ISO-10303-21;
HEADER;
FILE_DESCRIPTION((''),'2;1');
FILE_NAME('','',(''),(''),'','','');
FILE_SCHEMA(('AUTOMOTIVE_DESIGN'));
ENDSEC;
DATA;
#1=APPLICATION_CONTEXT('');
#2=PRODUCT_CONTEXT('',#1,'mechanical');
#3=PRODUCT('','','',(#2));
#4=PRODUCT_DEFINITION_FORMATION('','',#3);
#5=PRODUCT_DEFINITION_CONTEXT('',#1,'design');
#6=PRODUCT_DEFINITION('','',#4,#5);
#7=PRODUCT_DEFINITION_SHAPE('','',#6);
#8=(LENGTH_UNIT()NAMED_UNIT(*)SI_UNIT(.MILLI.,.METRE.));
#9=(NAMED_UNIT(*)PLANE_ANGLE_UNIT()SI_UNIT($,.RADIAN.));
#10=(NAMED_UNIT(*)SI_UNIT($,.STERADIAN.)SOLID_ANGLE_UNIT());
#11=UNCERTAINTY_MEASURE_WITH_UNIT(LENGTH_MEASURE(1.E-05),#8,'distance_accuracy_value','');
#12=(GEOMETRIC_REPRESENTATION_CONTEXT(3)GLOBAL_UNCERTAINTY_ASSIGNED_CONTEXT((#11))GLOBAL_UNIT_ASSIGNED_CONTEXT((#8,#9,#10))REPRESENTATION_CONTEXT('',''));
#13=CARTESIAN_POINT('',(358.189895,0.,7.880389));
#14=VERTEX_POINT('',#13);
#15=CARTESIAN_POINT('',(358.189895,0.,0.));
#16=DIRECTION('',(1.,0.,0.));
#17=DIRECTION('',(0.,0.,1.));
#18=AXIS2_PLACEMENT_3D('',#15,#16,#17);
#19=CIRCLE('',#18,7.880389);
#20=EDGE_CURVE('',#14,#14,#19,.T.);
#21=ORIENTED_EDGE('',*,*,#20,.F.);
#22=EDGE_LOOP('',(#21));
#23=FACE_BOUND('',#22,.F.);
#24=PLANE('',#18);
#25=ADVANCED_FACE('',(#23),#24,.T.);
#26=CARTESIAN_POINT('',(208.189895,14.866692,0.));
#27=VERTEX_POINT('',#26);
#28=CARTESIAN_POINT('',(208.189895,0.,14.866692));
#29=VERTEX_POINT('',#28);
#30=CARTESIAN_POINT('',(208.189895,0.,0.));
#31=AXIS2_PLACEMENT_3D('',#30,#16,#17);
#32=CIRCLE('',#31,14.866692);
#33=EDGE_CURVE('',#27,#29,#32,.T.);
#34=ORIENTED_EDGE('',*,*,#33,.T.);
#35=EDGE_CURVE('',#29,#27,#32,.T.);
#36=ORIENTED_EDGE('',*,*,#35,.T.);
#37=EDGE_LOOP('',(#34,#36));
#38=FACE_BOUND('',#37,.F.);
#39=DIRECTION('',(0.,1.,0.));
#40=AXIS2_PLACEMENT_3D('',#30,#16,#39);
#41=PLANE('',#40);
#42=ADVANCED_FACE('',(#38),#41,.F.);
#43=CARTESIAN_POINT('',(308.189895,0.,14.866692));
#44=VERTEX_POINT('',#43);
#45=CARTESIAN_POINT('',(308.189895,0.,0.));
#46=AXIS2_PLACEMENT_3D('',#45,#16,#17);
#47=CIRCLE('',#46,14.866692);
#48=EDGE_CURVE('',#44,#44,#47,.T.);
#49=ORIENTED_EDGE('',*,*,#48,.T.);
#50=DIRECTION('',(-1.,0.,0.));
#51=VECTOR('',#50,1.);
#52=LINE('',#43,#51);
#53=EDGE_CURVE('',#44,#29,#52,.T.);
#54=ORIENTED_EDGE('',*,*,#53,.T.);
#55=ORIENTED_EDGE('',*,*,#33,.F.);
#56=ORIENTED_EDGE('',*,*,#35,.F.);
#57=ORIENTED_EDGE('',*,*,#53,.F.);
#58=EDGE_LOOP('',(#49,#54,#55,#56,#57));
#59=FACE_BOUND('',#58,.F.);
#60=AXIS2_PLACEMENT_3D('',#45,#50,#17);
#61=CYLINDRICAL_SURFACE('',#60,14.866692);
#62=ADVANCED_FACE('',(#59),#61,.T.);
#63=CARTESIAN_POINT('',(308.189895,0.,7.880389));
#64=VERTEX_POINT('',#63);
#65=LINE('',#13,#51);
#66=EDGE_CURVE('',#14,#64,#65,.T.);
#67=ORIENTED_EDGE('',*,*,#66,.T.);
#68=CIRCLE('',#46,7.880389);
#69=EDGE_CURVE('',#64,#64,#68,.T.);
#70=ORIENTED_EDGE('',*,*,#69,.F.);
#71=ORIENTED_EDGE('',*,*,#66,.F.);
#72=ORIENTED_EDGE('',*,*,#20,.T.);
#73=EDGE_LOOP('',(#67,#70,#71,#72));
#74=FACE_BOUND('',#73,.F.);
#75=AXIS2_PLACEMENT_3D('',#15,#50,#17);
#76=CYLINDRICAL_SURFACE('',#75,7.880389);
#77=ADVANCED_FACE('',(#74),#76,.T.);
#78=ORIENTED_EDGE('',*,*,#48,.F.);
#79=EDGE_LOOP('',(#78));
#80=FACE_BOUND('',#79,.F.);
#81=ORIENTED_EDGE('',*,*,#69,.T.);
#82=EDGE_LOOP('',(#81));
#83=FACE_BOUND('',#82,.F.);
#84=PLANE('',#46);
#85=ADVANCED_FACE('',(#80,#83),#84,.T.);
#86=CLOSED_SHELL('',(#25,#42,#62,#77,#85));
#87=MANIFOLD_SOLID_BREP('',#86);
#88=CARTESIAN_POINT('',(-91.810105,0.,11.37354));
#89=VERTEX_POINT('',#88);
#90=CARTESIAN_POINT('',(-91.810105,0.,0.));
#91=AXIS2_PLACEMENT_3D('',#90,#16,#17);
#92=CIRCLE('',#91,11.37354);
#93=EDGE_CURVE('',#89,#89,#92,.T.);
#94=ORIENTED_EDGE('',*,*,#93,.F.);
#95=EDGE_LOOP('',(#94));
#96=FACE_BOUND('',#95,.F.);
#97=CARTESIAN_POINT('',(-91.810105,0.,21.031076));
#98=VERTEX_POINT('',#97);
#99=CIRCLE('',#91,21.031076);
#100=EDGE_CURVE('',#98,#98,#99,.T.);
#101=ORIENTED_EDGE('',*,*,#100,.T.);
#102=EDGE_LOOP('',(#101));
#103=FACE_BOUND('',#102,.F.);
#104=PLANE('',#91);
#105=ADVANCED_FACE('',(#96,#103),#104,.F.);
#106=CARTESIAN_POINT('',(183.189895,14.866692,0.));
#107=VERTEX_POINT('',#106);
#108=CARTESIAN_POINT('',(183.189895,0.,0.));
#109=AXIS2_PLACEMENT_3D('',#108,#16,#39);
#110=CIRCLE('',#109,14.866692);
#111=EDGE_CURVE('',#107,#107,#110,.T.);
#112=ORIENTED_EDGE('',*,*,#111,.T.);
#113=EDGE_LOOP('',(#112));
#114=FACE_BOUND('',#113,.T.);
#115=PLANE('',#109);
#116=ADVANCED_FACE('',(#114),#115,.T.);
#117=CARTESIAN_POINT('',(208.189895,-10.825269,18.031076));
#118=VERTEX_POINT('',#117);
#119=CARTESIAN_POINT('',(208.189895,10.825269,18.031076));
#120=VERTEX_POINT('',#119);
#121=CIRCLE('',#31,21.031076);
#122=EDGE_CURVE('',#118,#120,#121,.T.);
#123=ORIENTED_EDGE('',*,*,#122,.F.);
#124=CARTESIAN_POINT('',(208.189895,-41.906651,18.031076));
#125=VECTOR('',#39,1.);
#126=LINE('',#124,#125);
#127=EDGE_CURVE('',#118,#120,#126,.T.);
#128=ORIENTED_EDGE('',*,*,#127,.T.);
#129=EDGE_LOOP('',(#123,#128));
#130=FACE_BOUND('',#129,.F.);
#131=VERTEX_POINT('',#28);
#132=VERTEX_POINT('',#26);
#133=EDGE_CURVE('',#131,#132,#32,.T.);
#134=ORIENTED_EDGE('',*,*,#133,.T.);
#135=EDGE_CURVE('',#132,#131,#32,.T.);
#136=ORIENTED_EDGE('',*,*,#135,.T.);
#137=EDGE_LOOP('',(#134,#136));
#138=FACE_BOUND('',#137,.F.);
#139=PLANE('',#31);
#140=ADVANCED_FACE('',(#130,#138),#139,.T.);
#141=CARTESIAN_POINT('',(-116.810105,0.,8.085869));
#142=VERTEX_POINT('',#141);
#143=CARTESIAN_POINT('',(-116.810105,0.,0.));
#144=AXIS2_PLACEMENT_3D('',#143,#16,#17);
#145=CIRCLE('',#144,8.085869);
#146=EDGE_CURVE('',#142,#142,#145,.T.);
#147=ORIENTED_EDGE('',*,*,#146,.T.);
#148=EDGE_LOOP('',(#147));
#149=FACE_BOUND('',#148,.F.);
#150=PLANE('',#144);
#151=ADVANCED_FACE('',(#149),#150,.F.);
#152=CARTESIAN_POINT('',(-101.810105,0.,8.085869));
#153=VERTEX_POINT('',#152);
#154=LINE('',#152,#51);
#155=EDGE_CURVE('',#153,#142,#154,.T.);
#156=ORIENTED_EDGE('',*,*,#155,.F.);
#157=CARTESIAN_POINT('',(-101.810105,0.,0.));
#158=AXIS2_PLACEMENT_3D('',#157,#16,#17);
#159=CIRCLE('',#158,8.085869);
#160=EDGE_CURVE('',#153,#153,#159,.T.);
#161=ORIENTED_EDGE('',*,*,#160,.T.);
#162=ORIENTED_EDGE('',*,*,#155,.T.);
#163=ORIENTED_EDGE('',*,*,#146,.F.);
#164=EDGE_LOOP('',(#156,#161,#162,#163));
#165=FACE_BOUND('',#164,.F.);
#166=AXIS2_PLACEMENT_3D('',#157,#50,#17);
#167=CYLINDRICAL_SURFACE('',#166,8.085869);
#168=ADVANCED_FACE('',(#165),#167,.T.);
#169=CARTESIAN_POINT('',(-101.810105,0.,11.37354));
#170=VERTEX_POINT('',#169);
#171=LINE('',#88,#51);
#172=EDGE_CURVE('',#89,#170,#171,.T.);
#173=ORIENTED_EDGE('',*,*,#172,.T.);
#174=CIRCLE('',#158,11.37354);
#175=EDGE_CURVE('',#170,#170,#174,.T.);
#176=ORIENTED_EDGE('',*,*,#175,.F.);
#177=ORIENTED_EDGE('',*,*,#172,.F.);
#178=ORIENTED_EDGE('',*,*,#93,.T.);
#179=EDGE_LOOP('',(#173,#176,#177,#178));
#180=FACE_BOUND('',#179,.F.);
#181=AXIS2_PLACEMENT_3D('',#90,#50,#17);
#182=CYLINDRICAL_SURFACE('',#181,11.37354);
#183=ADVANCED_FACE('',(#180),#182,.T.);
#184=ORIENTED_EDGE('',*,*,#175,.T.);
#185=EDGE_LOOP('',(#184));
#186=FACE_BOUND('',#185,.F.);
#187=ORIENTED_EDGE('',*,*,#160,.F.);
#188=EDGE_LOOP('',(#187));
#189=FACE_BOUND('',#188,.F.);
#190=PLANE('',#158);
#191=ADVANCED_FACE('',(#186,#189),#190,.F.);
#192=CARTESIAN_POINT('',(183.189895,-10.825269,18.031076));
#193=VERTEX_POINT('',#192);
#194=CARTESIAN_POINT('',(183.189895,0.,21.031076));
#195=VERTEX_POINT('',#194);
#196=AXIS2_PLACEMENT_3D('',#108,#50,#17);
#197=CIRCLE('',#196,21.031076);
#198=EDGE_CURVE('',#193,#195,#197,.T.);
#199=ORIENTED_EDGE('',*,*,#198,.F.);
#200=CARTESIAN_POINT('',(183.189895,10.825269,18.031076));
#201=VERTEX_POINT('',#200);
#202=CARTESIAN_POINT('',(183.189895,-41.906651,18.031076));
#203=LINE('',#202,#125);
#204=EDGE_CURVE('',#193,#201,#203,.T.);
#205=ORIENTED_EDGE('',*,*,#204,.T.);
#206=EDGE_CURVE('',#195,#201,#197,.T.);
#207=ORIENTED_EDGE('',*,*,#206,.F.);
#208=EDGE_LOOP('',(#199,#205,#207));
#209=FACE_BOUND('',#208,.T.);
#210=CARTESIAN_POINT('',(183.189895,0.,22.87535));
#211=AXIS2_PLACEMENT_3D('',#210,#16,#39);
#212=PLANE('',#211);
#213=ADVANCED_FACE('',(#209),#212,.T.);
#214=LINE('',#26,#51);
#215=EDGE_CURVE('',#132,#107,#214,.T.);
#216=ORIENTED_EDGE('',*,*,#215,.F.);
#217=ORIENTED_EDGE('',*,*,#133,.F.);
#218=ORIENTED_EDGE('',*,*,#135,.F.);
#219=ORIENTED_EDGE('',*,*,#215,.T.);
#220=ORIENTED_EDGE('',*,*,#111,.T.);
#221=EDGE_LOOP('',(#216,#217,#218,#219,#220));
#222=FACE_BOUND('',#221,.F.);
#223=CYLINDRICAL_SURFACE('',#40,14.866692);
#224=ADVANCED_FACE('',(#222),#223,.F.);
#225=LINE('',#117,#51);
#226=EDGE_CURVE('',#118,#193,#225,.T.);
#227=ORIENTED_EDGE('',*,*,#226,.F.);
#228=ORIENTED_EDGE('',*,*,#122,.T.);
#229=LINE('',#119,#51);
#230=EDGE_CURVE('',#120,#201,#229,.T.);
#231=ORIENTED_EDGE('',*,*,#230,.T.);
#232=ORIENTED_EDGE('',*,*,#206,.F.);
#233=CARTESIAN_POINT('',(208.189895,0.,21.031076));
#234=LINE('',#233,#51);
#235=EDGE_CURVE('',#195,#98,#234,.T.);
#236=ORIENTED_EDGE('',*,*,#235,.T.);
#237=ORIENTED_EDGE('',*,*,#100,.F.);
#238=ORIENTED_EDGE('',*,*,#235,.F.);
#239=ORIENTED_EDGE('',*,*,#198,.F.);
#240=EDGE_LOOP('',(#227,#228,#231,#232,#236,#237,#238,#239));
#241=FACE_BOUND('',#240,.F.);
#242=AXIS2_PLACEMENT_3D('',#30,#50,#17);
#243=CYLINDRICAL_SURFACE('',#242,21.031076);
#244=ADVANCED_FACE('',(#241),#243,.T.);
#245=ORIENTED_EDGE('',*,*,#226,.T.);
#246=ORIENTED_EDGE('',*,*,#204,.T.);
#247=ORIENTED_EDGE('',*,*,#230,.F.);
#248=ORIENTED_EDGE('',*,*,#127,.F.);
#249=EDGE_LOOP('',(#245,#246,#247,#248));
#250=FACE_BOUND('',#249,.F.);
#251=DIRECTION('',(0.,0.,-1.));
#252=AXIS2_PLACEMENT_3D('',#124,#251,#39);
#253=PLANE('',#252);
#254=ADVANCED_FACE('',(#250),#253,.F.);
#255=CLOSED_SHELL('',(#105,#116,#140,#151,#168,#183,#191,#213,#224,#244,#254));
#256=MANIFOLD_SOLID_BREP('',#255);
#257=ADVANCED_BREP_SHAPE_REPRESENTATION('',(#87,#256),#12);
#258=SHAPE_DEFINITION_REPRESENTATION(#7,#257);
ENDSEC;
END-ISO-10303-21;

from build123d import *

# Parameters (mm, degrees)
F2_R     = 14.866691899
F3_DEPTH = 25


with BuildPart() as f1:
    # F0 (on Front) → F1 (revolve)
    with BuildSketch(Plane.XZ):
        Polygon((-116.810104717, 0), (358.189895283, 0), (358.189895283, 7.8803886721), (308.189895283, 7.8803886721), (308.189895283, 14.866691899), (208.189895283, 14.866691899), (208.189895283, 21.0310760423), (-91.810104717, 21.0310760423), (-91.810104717, 11.3735402855), (-101.810104717, 11.3735402855), (-101.810104717, 8.0858688513), (-116.810104717, 8.0858688513), align=None)
    revolve(axis=Axis((120.689895283, 0, 0), (1, 0, 0)))

    # F2 (on face) → F3 (cut)
    with BuildSketch(Plane.YZ.offset(208.189895283)):
        with BuildLine():
            Line((10.8252693386, 18.0310760423), (41.9066511095, 18.0310760423))
            Line((41.9066511095, 18.0310760423), (41.9066511095, 27.3393926871))
            Line((41.9066511095, 27.3393926871), (-41.9066511095, 27.3393926871))
            Line((-41.9066511095, 27.3393926871), (-41.9066511095, 18.0310760423))
            Line((-41.9066511095, 18.0310760423), (-10.8252693386, 18.0310760423))
            ThreePointArc((-10.8252693386, 18.0310760423), (0, 21.0310760423), (10.8252693386, 18.0310760423))
        make_face()
        with BuildLine():
            Line((-10.8252693386, 18.0310760423), (10.8252693386, 18.0310760423))
            ThreePointArc((10.8252693386, 18.0310760423), (0, 21.0310760423), (-10.8252693386, 18.0310760423))
        make_face()
        Circle(F2_R)
    extrude(amount=-F3_DEPTH, mode=Mode.SUBTRACT)


solid = f1.part
